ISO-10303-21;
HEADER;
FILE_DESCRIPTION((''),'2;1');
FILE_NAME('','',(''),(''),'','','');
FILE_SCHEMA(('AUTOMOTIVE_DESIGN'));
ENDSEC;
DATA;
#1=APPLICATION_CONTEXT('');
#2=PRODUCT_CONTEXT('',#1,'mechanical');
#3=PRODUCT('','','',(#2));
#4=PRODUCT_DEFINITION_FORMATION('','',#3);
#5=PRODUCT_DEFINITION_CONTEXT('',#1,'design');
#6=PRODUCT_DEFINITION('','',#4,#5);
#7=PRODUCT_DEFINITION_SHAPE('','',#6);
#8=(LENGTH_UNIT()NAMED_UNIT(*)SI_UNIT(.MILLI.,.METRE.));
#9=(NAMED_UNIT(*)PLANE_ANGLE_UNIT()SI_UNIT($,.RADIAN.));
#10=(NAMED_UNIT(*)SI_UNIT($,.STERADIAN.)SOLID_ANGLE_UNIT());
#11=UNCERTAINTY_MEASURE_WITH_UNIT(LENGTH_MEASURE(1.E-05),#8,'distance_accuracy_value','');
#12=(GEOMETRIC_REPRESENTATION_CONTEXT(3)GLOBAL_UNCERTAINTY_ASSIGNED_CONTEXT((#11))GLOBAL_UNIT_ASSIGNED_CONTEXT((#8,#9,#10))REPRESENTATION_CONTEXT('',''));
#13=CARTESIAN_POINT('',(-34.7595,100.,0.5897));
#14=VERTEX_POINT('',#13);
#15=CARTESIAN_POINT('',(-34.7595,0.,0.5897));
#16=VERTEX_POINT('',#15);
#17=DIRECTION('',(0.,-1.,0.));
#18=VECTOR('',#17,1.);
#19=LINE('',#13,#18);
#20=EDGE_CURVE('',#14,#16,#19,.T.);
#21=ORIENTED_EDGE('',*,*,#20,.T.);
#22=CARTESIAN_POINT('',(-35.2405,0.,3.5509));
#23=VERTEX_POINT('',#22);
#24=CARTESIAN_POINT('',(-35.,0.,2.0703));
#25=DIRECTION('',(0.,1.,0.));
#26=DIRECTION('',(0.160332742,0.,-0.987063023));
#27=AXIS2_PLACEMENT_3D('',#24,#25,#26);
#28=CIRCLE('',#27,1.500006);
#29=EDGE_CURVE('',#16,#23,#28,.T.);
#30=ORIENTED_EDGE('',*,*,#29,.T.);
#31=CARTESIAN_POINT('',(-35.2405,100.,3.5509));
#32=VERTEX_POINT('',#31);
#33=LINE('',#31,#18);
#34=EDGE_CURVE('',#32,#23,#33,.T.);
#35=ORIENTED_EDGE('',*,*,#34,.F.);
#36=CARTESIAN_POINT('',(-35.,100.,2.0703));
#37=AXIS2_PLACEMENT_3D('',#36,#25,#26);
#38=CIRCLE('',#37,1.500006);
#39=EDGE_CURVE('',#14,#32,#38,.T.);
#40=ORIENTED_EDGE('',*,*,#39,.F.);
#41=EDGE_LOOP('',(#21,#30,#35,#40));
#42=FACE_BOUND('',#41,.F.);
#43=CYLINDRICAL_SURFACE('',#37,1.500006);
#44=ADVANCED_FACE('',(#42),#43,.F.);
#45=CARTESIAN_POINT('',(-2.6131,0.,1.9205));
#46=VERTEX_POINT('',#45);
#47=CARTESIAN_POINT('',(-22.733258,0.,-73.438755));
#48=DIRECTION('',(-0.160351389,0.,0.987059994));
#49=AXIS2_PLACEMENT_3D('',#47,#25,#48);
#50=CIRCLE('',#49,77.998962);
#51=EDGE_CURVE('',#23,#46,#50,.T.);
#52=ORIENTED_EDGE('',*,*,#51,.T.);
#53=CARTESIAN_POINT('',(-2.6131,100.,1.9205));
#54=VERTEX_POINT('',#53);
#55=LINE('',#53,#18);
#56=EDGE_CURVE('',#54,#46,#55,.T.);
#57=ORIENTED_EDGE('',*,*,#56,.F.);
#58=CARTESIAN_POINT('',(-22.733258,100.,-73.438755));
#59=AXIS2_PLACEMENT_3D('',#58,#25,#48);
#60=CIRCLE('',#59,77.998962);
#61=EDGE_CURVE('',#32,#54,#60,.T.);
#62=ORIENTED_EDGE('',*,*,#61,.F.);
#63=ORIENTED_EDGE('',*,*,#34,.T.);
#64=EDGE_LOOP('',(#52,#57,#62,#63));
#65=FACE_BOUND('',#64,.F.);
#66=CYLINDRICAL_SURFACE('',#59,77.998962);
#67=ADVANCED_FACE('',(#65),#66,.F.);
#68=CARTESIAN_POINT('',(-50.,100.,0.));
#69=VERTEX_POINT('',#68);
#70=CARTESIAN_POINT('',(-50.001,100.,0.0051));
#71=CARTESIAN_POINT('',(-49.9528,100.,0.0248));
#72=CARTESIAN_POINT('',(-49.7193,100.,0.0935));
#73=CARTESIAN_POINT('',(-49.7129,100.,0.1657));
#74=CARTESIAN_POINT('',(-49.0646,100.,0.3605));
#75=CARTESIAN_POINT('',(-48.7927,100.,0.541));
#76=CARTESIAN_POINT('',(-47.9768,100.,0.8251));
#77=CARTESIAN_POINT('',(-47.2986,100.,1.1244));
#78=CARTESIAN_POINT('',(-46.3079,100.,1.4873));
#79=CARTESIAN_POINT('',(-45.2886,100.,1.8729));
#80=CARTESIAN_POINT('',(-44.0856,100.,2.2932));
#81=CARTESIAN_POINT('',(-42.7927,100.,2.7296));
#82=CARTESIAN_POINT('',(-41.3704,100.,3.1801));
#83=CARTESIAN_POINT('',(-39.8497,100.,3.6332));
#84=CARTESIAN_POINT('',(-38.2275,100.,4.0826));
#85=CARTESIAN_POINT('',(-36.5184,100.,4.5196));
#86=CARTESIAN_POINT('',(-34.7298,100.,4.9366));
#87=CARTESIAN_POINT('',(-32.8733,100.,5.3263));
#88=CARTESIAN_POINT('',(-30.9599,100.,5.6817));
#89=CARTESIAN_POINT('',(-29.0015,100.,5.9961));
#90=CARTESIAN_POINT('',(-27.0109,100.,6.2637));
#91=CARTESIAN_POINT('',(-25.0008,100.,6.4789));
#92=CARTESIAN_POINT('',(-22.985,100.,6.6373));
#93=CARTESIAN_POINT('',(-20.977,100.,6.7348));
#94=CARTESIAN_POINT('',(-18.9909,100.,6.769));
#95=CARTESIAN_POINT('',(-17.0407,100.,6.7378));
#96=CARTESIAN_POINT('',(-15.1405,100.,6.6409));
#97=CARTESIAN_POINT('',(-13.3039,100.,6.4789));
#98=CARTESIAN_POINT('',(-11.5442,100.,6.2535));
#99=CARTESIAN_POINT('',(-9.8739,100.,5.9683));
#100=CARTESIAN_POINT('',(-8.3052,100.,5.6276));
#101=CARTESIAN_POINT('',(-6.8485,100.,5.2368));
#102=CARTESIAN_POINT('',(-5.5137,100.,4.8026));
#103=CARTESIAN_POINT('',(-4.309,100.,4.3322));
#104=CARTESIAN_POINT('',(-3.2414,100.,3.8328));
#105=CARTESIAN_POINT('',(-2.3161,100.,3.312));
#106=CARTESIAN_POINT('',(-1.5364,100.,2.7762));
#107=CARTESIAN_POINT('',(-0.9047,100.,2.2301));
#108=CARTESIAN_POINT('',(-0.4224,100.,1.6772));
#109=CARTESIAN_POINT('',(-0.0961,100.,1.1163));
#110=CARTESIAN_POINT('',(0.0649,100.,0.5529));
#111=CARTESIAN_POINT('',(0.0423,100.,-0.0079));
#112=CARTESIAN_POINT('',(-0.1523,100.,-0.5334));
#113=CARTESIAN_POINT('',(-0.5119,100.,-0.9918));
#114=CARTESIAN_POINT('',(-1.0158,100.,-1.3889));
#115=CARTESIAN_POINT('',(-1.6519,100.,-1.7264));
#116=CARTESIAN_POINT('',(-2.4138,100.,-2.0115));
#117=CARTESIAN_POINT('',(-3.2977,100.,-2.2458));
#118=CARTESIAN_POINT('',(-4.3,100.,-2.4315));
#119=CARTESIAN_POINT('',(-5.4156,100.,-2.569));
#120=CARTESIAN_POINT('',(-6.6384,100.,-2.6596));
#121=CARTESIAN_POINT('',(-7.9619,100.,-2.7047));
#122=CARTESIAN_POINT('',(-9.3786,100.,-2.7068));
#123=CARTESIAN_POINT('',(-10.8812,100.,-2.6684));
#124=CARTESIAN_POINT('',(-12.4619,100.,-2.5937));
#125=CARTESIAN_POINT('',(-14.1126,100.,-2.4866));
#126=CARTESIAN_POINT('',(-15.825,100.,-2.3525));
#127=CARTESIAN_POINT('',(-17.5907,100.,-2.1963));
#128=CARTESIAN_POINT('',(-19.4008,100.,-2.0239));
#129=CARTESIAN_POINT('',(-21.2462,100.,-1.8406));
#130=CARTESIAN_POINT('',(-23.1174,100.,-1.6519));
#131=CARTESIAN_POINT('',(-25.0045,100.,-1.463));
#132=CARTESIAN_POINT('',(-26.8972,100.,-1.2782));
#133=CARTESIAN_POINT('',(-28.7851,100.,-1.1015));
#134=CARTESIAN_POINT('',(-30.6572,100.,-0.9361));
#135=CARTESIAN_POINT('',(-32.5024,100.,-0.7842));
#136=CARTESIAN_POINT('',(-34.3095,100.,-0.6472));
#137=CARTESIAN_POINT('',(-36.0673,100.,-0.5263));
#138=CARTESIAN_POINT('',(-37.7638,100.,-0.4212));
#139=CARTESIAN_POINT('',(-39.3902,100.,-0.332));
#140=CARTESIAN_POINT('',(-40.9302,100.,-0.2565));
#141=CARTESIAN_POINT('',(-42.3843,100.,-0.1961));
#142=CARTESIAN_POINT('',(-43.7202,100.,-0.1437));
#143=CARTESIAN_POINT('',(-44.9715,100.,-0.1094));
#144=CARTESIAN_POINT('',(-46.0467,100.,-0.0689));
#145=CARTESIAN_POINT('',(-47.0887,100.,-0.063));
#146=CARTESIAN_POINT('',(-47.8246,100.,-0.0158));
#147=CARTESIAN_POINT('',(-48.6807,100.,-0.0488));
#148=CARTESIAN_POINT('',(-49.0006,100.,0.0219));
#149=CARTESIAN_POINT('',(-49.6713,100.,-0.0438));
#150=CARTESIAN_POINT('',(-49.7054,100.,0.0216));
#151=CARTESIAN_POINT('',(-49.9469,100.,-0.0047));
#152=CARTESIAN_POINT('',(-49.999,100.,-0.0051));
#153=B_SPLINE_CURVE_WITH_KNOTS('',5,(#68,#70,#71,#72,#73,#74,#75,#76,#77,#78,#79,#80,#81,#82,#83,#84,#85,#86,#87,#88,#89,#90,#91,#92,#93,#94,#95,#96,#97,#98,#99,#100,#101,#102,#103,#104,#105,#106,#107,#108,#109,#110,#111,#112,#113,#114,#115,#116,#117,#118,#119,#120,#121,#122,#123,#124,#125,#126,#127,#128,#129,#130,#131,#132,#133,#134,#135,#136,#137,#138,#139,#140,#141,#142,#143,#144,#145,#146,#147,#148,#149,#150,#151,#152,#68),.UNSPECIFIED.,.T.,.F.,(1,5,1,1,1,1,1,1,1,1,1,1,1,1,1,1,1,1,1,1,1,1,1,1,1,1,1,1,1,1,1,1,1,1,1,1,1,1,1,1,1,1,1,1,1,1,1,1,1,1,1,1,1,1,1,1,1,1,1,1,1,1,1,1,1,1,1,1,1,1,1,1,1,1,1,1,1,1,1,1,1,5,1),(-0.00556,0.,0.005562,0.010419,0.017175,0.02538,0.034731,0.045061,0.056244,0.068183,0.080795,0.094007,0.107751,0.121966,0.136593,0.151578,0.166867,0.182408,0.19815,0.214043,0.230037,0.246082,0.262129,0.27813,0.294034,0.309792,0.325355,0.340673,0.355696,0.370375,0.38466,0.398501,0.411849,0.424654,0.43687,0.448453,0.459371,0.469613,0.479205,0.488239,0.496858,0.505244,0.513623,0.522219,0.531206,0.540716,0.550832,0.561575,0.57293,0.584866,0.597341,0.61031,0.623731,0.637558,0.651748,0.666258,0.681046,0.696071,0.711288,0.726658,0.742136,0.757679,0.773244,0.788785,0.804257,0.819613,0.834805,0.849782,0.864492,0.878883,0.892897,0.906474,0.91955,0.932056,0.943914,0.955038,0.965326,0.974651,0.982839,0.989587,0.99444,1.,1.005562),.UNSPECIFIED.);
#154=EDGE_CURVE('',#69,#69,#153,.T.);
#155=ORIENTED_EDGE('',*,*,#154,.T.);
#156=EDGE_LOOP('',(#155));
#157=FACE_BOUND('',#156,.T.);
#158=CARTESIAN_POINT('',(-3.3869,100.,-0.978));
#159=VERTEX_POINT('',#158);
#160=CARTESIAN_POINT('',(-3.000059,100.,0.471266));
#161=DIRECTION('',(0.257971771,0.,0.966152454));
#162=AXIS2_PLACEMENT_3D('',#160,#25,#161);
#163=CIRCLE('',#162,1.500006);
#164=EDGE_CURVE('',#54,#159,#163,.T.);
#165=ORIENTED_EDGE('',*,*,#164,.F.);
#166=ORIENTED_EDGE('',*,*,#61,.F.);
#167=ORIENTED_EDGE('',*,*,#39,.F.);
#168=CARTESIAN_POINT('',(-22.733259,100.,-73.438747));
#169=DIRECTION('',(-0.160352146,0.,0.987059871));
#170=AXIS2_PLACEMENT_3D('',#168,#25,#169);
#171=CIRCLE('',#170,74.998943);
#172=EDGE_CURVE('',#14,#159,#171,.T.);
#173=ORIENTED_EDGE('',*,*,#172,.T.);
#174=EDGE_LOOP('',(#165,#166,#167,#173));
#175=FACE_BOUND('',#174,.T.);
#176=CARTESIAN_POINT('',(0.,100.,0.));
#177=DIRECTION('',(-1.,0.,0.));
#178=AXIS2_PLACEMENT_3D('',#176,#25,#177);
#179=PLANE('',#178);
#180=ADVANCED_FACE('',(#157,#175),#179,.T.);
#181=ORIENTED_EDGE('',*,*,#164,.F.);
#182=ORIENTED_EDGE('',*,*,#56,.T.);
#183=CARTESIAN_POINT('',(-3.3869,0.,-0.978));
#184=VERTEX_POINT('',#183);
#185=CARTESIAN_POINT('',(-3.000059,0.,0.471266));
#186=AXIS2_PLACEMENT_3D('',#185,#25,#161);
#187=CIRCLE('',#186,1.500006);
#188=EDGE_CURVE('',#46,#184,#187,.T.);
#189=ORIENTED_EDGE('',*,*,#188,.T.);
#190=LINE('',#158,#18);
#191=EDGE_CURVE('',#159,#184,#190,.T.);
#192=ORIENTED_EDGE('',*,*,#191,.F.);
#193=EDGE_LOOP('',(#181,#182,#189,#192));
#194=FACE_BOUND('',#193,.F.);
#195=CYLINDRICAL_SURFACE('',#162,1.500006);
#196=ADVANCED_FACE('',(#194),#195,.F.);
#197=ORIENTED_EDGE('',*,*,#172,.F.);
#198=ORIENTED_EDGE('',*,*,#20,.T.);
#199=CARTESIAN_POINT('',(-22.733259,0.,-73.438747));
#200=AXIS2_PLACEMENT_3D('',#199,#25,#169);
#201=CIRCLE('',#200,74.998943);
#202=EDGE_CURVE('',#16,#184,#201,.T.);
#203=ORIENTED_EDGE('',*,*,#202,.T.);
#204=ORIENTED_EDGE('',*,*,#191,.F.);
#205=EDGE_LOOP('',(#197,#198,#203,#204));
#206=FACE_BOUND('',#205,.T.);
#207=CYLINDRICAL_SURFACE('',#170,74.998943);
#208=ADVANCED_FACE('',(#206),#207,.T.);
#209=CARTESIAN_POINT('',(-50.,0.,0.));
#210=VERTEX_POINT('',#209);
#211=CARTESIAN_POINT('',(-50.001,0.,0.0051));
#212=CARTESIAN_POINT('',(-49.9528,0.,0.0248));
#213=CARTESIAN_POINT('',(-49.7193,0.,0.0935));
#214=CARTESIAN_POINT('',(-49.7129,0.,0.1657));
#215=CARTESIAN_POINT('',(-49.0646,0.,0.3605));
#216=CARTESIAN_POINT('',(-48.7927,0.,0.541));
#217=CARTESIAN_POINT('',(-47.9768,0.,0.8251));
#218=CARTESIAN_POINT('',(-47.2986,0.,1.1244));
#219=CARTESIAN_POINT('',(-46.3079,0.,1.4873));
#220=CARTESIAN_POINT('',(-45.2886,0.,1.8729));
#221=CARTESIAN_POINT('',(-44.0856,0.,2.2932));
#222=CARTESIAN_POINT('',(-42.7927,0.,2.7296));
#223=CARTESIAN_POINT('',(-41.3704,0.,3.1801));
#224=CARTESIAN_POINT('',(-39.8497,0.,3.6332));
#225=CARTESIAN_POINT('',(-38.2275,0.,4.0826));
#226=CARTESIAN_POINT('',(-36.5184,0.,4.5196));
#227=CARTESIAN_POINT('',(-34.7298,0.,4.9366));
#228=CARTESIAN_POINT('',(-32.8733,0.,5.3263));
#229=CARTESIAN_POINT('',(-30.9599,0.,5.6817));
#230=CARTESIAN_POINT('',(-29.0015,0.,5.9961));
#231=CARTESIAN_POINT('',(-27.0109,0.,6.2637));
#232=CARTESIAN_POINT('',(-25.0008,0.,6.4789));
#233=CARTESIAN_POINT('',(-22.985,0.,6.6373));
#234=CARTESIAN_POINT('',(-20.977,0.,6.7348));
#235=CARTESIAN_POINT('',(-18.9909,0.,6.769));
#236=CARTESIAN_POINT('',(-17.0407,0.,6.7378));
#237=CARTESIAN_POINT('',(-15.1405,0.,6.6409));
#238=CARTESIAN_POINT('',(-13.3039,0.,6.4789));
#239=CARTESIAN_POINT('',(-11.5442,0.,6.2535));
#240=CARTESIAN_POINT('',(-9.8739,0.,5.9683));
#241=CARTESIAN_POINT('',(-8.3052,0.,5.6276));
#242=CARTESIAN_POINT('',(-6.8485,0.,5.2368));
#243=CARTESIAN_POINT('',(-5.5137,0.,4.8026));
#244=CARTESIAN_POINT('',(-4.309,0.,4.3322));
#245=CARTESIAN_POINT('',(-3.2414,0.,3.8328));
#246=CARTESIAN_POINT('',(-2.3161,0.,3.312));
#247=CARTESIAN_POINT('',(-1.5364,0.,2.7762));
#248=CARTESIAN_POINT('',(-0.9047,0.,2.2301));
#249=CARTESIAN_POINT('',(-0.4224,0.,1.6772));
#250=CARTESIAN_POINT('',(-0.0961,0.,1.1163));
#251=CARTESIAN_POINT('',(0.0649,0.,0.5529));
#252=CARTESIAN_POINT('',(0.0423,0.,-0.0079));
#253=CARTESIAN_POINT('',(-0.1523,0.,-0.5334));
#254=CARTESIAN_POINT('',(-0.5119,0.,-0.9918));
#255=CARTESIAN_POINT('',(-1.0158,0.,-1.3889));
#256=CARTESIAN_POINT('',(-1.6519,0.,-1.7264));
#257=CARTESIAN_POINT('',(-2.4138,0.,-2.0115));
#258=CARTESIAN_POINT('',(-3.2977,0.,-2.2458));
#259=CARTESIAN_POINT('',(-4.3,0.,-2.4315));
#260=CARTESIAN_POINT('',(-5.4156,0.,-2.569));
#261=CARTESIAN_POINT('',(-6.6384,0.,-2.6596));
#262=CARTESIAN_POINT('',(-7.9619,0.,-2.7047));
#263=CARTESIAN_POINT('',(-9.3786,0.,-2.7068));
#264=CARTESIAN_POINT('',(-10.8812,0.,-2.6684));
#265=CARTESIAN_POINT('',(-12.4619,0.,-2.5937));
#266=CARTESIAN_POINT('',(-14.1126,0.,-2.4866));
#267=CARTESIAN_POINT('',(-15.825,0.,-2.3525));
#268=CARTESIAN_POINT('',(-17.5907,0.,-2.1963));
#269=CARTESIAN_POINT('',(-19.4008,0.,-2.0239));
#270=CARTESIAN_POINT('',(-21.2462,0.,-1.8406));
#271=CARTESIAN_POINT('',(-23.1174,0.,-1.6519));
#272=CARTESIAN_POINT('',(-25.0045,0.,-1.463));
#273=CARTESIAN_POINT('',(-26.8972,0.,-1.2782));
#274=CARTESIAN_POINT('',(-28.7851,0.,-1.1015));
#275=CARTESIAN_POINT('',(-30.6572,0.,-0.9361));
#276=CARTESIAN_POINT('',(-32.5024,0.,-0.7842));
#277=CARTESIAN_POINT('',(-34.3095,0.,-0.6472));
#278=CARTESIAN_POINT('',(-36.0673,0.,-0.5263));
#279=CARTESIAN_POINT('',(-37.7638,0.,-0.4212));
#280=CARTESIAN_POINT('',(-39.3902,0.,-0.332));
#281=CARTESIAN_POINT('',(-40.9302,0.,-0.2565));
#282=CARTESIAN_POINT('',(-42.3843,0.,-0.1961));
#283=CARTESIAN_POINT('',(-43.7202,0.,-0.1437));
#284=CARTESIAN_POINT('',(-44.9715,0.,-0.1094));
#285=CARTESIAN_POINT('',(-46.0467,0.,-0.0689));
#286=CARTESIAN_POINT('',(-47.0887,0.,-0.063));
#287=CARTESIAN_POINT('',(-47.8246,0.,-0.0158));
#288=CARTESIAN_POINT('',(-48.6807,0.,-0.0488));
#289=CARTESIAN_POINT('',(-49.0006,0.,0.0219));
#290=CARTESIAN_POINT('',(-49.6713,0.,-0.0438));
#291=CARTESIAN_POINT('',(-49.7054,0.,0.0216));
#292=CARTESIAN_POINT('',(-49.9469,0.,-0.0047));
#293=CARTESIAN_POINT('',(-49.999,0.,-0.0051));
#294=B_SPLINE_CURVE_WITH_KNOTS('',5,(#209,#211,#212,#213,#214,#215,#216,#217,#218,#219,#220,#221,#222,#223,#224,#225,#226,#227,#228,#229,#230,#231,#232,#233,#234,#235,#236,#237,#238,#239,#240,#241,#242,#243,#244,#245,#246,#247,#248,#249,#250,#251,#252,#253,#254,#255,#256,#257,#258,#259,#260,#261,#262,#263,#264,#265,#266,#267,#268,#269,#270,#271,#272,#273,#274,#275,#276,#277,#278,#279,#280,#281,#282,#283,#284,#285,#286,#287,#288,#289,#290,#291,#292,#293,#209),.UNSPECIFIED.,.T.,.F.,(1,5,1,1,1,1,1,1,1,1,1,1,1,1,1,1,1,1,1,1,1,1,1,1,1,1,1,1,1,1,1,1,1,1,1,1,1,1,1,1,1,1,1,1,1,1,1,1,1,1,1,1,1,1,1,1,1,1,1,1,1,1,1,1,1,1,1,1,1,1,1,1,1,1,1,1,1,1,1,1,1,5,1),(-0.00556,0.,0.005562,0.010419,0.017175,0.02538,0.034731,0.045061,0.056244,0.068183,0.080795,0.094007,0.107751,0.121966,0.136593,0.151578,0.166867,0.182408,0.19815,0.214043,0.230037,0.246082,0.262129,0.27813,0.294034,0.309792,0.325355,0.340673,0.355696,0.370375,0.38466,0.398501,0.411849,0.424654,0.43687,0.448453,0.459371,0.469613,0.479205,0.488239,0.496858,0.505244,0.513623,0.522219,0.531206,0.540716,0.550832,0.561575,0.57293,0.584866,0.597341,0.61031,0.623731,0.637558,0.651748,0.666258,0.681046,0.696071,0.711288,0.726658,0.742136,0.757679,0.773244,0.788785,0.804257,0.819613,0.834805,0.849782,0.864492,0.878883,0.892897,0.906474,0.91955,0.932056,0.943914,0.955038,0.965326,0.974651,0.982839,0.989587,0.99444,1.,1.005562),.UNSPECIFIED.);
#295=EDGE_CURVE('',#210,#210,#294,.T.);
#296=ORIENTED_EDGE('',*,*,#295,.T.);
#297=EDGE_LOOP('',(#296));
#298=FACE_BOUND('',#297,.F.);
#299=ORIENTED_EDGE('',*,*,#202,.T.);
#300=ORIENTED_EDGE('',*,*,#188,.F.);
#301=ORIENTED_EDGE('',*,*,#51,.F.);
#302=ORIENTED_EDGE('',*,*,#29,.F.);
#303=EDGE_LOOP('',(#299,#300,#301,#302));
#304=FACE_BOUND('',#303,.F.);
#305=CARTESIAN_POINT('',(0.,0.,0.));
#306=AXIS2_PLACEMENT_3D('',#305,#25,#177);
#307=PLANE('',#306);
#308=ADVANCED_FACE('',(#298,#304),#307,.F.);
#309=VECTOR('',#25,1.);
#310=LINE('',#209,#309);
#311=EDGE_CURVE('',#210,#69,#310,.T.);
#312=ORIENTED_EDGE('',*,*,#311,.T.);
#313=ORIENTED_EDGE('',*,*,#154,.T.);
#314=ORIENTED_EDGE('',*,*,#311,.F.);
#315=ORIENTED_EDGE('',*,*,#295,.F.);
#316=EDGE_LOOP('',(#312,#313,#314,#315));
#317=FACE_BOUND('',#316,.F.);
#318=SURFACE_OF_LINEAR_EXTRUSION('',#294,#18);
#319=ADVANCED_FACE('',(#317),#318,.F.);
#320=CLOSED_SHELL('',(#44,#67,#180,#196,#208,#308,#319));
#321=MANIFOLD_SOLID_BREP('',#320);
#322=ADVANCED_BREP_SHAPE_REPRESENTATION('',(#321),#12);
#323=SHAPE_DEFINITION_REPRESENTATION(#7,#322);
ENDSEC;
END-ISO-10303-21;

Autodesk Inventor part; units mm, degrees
ref_plane "YZ Plane" through (0, 0, 0) normal (1, 0, 0) x (0, 1, 0)
ref_plane "XZ Plane" through (0, 0, 0) normal (0, 1, 0) x (-1, 0, 0)
ref_plane "XY Plane" through (0, 0, 0) normal (0, 0, 1) x (1, 0, 0)
sketch "草圖2" plane through (0, 0, 0) normal (0, 1, 0) x (-1, 0, 0)
  spline S0 degree 5 poles (50, 0) (50.001, 0.0051) (49.9528, 0.0248) (49.7193, 0.0935) (49.7129, 0.1657) (49.0646, 0.3605) (48.7927, 0.541) (47.9768, 0.8251) (47.2986, 1.1244) (46.3079, 1.4873) (45.2886, 1.8729) (44.0856, 2.2932) (42.7927, 2.7296) (41.3704, 3.1801) (39.8497, 3.6332) (38.2275, 4.0826) (36.5184, 4.5196) (34.7298, 4.9366) (32.8733, 5.3263) (30.9599, 5.6817) (29.0015, 5.9961) (27.0109, 6.2637) (25.0008, 6.4789) (22.985, 6.6373) (20.977, 6.7348) (18.9909, 6.769) (17.0407, 6.7378) (15.1405, 6.6409) (13.3039, 6.4789) (11.5442, 6.2535) (9.8739, 5.9683) (8.3052, 5.6276) (6.8485, 5.2368) (5.5137, 4.8026) (4.309, 4.3322) (3.2414, 3.8328) (2.3161, 3.312) (1.5364, 2.7762) (0.9047, 2.2301) (0.4224, 1.6772) (0.0961, 1.1163) (-0.0649, 0.5529) (-0.0423, -0.0079) (0.1523, -0.5334) (0.5119, -0.9918) (1.0158, -1.3889) (1.6519, -1.7264) (2.4138, -2.0115) (3.2977, -2.2458) (4.3, -2.4315) (5.4156, -2.569) (6.6384, -2.6596) (7.9619, -2.7047) (9.3786, -2.7068) (10.8812, -2.6684) (12.4619, -2.5937) (14.1126, -2.4866) (15.825, -2.3525) (17.5907, -2.1963) (19.4008, -2.0239) (21.2462, -1.8406) (23.1174, -1.6519) (25.0045, -1.463) (26.8972, -1.2782) (28.7851, -1.1015) (30.6572, -0.9361) (32.5024, -0.7842) (34.3095, -0.6472) (36.0673, -0.5263) (37.7638, -0.4212) (39.3902, -0.332) (40.9302, -0.2565) (42.3843, -0.1961) (43.7202, -0.1437) (44.9715, -0.1094) (46.0467, -0.0689) (47.0887, -0.063) (47.8246, -0.0158) (48.6807, -0.0488) (49.0006, 0.0219) (49.6713, -0.0438) (49.7054, 0.0216) (49.9469, -0.0047) (49.999, -0.0051) (50, 0) knots 0 0 0 0 0 0 0.005562 0.010419 0.017175 0.02538 0.034731 0.045061 0.056244 0.068183 0.080795 0.094007 0.107751 0.121966 0.136593 0.151578 0.166867 0.182408 0.19815 0.214043 0.230037 0.246082 0.262129 0.27813 0.294034 0.309792 0.325355 0.340673 0.355696 0.370375 0.38466 0.398501 0.411849 0.424654 0.43687 0.448453 0.459371 0.469613 0.479205 0.488239 0.496858 0.505244 0.513623 0.522219 0.531206 0.540716 0.550832 0.561575 0.57293 0.584866 0.597341 0.61031 0.623731 0.637558 0.651748 0.666258 0.681046 0.696071 0.711288 0.726658 0.742136 0.757679 0.773244 0.788785 0.804257 0.819613 0.834805 0.849782 0.864492 0.878883 0.892897 0.906474 0.91955 0.932056 0.943914 0.955038 0.965326 0.974651 0.982839 0.989587 0.99444 1 1 1 1 1 1
  point P0 (49.7052, 0.1268)
  point P1 (49.3378, 0.2828)
  point P2 (48.8255, 0.4967)
  point P3 (48.1705, 0.7643)
  point P4 (47.3758, 1.0802)
  point P5 (46.4449, 1.4382)
  point P6 (45.382, 1.8315)
  point P7 (44.1923, 2.2525)
  point P8 (42.8818, 2.6935)
  point P9 (41.4571, 3.1465)
  point P10 (39.9258, 3.6031)
  point P11 (38.2963, 4.0553)
  point P12 (36.5777, 4.4952)
  point P13 (34.7799, 4.9149)
  point P14 (32.9136, 5.3069)
  point P15 (30.9903, 5.6643)
  point P16 (29.0217, 5.9802)
  point P17 (27.0206, 6.2489)
  point P18 (25, 6.4646)
  point P19 (22.9736, 6.6229)
  point P20 (20.9552, 6.7199)
  point P21 (18.959, 6.7527)
  point P22 (16.9991, 6.7195)
  point P23 (15.0896, 6.6199)
  point P24 (13.2444, 6.4545)
  point P25 (11.477, 6.2251)
  point P26 (9.8, 5.9351)
  point P27 (8.2256, 5.5888)
  point P28 (6.7649, 5.192)
  point P29 (5.4277, 4.7509)
  point P30 (4.2229, 4.273)
  point P31 (3.1582, 3.7659)
  point P32 (2.2397, 3.2374)
  point P33 (1.4727, 2.6951)
  point P34 (0.8607, 2.1465)
  point P35 (0.4065, 1.5979)
  point P36 (0.1115, 1.0548)
  point P37 (-0.0238, 0.5212)
  point P38 (0, 0)
  point P39 (0.1779, -0.4904)
  point P40 (0.5041, -0.9324)
  point P41 (0.975, -1.3254)
  point P42 (1.5865, -1.669)
  point P43 (2.3333, -1.9629)
  point P44 (3.2099, -2.2069)
  point P45 (4.2098, -2.4009)
  point P46 (5.3262, -2.5456)
  point P47 (6.552, -2.6421)
  point P48 (7.8798, -2.692)
  point P49 (9.3019, -2.6978)
  point P50 (10.8107, -2.6625)
  point P51 (12.3982, -2.5901)
  point P52 (14.0561, -2.485)
  point P53 (15.7763, -2.3521)
  point P54 (17.5501, -2.197)
  point P55 (19.3688, -2.0252)
  point P56 (21.2231, -1.8422)
  point P57 (23.1034, -1.6536)
  point P58 (25, -1.4646)
  point P59 (26.9024, -1.2796)
  point P60 (28.8001, -1.1026)
  point P61 (30.6821, -0.9368)
  point P62 (32.5372, -0.7844)
  point P63 (34.3543, -0.6471)
  point P64 (36.1218, -0.5257)
  point P65 (37.8286, -0.4204)
  point P66 (39.4634, -0.3306)
  point P67 (41.0153, -0.2554)
  point P68 (42.4735, -0.1935)
  point P69 (43.828, -0.1436)
  point P70 (45.0688, -0.104)
  point P71 (46.1872, -0.0732)
  point P72 (47.1745, -0.0497)
  point P73 (48.0234, -0.0321)
  point P74 (48.7274, -0.0192)
  point P75 (49.2807, -0.0103)
  point P76 (49.6793, -0.0044)
  point P77 (49.9197, -0.0011)
extrude "擠出1" add sketch "草圖2" along normal blind 100
sketch "草圖3" plane through (0, 100, 0) normal (0, 1, 0) x (1, 0, 0)
  arc A0 (-35, -2.0703) -> (-3, -0.4713) centre (-22.7332, 73.4398) ccw construction
  arc A1 (-35.2405, -3.5509) -> (-2.6131, -1.9205) centre (-22.7332, 73.4398) ccw
  arc A2 (-34.7595, -0.5897) -> (-3.3869, 0.978) centre (-22.7332, 73.4398) ccw
  arc A3 (-34.7595, -0.5897) -> (-35.2405, -3.5509) centre (-35, -2.0703) ccw
  arc A4 (-2.6131, -1.9205) -> (-3.3869, 0.978) centre (-3, -0.4713) ccw
  line L0 (0, 89.4747) -> (0, -22.8096) projected
  dimension "d3" = 1.5
  dimension "d5" = 3
  dimension "d6" = 32
extrude "擠出2" cut sketch "草圖3" against normal through all
properties part number "5518"
